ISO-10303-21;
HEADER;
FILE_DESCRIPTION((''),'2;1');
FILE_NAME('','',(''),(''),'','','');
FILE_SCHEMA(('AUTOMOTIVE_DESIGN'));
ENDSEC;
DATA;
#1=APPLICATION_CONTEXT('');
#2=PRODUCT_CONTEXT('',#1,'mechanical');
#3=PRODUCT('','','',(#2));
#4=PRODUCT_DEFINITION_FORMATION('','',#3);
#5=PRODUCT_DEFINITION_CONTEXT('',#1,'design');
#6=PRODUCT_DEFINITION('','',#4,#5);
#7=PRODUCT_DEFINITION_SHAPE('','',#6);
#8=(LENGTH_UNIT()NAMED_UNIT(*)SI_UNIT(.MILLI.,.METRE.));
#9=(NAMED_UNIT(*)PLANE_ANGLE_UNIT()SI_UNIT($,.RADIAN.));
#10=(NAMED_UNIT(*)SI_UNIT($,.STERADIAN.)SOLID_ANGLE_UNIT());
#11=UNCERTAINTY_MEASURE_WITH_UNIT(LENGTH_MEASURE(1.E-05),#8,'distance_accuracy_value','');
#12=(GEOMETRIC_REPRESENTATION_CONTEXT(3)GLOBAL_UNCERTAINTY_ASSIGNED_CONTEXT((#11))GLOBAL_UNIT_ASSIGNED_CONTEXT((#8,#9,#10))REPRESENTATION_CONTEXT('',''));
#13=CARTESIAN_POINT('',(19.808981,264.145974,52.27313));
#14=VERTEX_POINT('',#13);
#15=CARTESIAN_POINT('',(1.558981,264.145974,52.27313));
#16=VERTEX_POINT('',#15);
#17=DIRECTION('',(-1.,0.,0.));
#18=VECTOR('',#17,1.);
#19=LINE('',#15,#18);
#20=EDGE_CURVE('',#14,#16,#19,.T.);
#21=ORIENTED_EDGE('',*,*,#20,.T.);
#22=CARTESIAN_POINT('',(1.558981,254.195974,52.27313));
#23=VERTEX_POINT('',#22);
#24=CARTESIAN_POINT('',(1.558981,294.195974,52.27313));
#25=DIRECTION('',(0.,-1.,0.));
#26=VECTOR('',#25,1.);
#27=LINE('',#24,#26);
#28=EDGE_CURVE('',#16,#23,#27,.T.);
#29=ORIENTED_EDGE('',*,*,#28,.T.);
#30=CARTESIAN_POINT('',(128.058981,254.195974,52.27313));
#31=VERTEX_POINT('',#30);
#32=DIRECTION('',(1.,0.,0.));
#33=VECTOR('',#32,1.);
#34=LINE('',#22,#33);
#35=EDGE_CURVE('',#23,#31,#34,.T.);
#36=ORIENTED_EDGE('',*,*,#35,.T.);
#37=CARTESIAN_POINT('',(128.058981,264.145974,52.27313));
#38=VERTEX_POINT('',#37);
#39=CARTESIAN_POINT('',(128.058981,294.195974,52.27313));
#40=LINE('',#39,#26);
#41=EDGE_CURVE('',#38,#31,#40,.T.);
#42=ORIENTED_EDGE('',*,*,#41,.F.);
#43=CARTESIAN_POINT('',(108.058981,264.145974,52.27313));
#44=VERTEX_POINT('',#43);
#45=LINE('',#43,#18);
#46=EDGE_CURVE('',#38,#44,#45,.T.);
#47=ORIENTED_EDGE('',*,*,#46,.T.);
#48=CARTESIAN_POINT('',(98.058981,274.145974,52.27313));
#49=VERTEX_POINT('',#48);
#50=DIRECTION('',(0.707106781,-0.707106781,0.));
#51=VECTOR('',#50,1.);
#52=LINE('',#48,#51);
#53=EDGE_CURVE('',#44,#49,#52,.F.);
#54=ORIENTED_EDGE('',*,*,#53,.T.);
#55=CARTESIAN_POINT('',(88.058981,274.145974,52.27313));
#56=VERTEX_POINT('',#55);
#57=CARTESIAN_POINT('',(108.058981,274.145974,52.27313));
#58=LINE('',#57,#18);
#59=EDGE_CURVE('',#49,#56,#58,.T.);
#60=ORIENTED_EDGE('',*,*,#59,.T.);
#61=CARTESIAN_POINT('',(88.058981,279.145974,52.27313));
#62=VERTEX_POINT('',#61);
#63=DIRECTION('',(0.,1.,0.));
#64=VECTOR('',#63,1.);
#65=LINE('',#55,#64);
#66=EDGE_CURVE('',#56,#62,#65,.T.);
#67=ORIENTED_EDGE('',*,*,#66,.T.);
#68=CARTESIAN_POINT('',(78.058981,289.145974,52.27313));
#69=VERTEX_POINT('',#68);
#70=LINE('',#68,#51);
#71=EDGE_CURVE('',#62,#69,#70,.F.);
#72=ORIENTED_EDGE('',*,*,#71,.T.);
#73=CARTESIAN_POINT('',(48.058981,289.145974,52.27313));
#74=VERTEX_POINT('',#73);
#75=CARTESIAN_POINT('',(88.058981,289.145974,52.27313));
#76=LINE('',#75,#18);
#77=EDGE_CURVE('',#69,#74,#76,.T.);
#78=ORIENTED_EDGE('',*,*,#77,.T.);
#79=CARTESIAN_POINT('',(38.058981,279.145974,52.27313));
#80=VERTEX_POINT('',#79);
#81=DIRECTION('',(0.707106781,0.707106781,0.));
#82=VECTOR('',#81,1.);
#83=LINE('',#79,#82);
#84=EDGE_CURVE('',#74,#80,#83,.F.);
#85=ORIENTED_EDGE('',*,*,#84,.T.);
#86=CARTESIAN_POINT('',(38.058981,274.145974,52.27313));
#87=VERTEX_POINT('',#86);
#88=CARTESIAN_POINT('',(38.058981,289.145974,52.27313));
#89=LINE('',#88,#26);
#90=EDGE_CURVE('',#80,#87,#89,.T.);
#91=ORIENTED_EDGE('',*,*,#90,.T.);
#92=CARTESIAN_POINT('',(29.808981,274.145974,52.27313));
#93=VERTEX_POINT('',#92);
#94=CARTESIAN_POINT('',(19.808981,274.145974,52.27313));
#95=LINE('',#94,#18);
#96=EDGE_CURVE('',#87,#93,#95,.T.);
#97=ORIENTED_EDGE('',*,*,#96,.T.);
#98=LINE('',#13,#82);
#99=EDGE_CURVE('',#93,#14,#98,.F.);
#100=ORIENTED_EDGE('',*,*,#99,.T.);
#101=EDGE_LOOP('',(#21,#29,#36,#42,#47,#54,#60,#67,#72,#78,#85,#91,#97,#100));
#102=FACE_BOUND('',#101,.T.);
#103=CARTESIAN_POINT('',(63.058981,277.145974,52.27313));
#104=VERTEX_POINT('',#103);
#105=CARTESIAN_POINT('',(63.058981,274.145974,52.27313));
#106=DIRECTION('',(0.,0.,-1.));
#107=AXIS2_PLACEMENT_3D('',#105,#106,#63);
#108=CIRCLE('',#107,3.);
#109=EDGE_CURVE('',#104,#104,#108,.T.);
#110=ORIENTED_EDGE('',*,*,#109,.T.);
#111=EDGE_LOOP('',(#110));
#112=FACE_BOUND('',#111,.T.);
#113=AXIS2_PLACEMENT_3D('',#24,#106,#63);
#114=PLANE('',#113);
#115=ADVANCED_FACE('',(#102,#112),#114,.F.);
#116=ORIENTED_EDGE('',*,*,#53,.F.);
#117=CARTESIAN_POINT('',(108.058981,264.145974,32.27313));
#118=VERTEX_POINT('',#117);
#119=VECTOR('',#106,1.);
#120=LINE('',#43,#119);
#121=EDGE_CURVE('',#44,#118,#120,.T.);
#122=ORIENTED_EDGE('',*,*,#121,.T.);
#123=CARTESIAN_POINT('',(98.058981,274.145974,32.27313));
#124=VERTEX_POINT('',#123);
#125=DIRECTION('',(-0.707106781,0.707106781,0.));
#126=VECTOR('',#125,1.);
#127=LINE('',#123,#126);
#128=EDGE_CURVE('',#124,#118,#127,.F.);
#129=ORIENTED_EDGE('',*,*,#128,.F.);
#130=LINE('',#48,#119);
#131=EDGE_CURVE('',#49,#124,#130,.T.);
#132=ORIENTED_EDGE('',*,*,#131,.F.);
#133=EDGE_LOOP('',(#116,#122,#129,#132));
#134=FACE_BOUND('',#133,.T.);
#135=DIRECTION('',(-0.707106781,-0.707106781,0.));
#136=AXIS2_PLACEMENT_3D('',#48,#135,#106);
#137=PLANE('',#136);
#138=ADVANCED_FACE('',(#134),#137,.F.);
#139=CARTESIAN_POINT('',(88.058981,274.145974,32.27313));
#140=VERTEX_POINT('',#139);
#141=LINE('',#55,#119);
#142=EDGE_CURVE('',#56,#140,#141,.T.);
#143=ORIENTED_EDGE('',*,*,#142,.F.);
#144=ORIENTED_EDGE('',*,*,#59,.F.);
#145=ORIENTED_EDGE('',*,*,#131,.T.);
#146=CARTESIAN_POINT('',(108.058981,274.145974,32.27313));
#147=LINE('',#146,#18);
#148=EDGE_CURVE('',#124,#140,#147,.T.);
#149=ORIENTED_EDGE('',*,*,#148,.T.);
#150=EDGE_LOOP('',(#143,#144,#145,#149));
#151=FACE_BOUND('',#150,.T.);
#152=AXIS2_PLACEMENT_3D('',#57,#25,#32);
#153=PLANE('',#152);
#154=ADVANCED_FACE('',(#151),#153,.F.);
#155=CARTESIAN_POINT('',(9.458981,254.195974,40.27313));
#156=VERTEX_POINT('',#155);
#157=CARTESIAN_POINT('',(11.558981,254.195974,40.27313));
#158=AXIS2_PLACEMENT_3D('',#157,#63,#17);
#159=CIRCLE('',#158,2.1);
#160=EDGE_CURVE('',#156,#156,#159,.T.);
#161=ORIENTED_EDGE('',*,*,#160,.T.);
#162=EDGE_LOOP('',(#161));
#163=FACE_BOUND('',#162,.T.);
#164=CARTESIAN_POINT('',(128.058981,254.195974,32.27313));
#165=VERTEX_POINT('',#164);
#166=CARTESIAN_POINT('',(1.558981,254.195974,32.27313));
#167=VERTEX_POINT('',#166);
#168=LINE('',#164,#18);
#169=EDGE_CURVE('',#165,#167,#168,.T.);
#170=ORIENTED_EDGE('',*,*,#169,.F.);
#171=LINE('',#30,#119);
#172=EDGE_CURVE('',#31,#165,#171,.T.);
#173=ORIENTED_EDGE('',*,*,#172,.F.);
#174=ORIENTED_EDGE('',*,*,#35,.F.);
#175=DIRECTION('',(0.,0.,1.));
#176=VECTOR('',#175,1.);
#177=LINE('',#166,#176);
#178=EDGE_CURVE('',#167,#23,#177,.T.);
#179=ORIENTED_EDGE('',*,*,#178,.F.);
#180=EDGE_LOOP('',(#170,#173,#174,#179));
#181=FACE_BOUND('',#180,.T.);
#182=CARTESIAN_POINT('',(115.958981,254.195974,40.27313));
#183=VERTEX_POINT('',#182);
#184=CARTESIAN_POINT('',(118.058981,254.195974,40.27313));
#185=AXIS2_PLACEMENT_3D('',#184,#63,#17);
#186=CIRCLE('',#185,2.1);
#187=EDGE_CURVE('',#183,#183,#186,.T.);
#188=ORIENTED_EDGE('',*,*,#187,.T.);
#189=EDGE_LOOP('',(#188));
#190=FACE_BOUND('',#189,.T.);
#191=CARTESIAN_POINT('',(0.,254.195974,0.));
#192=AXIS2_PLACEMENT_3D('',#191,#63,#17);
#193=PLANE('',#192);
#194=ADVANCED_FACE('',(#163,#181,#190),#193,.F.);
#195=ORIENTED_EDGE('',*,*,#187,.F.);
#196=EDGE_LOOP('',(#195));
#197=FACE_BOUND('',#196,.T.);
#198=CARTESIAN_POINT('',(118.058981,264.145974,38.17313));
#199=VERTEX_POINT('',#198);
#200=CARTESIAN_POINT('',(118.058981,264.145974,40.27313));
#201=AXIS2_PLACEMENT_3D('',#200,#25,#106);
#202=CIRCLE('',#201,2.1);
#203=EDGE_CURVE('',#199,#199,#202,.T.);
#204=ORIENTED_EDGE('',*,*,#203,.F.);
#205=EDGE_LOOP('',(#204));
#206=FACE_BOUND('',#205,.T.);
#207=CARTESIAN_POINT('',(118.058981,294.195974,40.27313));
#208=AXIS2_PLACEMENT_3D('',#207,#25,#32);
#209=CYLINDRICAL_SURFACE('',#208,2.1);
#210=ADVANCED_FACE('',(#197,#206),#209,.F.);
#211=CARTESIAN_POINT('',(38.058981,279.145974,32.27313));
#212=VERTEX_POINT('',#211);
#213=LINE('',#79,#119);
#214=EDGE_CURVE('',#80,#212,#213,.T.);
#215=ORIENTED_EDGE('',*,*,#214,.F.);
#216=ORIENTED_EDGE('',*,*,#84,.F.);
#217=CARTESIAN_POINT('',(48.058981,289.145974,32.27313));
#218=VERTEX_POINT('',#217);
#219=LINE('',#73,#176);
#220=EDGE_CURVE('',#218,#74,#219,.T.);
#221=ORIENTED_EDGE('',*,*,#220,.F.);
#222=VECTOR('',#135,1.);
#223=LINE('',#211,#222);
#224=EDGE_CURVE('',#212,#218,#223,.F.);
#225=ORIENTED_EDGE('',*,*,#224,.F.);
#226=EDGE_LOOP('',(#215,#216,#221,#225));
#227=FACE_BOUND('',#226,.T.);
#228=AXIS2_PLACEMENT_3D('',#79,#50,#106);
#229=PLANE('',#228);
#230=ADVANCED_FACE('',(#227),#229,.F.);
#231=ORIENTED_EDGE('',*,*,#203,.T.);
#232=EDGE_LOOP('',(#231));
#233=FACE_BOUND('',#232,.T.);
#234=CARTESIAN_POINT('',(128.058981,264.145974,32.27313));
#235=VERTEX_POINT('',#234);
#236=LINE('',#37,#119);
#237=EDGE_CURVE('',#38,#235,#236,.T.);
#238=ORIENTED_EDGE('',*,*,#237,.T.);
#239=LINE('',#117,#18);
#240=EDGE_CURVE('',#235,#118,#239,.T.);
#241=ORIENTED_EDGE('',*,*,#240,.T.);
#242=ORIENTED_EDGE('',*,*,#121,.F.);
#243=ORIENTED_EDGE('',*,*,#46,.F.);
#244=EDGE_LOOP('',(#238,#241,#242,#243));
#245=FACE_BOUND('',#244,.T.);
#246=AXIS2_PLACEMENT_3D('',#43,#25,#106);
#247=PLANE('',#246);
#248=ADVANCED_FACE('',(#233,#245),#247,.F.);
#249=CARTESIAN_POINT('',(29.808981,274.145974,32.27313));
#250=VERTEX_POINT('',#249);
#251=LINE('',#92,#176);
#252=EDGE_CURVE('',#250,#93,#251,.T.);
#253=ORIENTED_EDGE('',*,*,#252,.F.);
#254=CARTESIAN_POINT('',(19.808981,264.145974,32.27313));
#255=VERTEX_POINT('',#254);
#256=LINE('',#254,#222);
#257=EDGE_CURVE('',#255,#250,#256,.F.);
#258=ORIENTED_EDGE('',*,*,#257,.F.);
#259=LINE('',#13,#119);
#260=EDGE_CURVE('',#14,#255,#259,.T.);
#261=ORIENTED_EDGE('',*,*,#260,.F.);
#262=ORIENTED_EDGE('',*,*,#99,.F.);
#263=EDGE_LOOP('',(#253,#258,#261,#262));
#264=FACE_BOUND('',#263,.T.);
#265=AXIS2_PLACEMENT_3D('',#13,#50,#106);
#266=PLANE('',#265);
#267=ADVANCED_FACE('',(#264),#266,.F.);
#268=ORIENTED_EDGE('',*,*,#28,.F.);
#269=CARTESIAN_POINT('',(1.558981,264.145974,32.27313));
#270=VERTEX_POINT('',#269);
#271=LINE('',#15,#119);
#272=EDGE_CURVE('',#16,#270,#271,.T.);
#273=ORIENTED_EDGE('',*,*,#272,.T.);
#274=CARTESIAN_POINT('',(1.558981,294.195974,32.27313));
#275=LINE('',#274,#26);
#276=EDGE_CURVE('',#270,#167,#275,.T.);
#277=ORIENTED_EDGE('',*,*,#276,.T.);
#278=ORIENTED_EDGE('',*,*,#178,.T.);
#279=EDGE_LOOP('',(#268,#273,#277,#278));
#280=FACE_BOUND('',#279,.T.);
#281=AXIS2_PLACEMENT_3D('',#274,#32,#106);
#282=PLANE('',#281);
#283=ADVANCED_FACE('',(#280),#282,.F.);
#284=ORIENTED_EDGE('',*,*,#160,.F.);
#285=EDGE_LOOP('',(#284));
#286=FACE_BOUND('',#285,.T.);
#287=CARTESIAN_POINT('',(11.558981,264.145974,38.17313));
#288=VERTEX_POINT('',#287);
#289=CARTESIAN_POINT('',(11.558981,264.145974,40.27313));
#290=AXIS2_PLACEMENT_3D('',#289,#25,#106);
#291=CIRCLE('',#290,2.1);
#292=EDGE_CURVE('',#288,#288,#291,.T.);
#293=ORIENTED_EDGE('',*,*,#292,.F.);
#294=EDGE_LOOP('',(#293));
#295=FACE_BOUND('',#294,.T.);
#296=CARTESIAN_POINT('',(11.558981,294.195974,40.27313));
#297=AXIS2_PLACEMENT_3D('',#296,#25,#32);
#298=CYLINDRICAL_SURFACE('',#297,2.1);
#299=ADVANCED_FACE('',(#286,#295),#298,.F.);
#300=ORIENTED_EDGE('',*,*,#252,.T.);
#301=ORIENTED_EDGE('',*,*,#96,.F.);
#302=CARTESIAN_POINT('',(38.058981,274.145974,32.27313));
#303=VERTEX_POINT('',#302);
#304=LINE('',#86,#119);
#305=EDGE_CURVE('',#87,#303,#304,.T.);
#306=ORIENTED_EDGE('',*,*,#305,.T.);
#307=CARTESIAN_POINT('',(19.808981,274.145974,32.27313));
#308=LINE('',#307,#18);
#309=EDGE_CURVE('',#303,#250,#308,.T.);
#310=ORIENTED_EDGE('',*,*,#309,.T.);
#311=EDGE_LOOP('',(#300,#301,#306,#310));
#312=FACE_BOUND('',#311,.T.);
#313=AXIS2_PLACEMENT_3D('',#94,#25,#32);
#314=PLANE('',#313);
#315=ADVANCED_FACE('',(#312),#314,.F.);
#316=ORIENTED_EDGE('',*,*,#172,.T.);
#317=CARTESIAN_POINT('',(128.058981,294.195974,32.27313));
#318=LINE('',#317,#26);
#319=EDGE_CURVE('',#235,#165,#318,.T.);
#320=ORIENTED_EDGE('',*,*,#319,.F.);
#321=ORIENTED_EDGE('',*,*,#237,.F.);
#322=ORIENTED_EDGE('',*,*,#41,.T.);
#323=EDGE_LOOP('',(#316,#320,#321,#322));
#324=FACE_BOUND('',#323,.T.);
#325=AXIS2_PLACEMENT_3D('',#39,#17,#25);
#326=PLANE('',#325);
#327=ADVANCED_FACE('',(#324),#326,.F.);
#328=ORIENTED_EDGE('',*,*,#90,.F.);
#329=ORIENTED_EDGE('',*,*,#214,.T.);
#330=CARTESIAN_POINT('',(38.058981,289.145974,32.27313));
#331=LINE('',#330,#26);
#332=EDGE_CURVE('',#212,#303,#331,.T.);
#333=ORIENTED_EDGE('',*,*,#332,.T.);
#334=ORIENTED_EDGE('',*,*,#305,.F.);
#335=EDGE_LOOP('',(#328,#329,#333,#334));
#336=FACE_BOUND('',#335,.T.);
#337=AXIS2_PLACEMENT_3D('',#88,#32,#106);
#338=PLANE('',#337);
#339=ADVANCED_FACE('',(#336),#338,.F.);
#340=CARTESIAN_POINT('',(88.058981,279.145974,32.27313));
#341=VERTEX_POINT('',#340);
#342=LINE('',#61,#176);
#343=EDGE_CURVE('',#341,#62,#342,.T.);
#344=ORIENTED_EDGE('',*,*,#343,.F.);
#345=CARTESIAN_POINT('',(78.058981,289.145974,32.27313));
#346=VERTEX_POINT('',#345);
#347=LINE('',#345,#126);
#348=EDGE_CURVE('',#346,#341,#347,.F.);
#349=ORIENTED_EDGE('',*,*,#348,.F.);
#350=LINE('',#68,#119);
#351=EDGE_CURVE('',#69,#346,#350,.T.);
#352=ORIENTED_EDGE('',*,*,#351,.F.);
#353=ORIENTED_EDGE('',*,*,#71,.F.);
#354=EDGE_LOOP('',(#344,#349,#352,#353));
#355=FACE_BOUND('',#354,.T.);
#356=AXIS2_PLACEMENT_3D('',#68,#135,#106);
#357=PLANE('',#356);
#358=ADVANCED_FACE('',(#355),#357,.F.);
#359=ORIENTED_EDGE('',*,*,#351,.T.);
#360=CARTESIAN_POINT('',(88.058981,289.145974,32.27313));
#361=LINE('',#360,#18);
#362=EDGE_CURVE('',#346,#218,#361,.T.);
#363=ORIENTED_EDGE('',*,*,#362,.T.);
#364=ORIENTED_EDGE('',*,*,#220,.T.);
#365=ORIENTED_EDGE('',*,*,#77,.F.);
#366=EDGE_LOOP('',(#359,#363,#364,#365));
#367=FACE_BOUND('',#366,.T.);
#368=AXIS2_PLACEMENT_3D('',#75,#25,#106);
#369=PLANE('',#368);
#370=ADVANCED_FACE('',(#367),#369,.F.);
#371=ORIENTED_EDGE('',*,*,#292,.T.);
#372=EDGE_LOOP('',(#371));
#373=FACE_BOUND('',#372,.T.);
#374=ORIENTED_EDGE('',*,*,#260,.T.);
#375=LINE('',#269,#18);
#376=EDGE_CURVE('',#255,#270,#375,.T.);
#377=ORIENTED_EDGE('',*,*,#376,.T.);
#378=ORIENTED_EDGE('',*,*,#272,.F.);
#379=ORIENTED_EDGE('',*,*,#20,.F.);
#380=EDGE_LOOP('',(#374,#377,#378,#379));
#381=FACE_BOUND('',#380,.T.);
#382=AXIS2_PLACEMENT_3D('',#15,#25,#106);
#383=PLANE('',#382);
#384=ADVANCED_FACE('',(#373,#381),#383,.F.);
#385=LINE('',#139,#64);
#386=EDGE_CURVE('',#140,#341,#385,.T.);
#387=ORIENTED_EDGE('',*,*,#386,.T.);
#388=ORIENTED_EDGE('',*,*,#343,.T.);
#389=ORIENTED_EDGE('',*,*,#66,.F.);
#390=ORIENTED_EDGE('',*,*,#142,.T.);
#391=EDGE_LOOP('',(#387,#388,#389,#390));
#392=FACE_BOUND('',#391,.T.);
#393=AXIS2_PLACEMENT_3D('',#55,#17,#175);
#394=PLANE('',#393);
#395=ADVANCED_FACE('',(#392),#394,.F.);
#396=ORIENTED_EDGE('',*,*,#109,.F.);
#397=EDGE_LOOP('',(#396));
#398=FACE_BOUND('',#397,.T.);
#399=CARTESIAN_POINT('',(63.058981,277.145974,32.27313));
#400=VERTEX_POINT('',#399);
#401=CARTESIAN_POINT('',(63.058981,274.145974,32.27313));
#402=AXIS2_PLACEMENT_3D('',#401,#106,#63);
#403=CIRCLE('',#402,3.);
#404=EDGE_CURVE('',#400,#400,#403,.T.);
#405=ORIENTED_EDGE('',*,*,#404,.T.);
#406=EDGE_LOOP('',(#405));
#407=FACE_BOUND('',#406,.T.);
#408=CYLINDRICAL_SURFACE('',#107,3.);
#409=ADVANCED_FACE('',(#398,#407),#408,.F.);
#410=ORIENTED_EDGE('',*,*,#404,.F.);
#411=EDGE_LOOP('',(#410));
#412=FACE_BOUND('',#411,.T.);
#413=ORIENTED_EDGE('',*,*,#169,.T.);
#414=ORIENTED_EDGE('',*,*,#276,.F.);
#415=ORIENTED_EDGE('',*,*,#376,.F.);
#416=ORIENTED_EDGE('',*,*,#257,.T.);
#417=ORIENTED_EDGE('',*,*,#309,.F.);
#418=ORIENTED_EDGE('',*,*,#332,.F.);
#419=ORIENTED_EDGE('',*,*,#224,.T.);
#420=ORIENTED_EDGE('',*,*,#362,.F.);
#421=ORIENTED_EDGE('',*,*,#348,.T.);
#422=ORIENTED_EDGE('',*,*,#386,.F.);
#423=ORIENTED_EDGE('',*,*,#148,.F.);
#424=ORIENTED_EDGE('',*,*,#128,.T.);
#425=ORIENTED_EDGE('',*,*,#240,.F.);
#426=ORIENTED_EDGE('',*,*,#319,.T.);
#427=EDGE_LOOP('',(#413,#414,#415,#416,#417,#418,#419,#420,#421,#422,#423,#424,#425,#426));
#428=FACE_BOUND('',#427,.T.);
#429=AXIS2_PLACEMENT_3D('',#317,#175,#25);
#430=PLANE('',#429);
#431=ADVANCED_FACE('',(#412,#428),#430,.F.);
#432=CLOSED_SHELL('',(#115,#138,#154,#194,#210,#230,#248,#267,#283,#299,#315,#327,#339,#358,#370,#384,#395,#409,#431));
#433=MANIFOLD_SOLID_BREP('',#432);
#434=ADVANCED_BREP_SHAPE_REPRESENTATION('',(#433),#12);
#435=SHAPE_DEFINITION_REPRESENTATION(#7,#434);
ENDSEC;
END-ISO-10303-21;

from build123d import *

# Parameters (mm, degrees)
SKETCH_1_W          = 126.5
SKETCH_1_H          = 20
SKETCH_1_R          = 2.1
EXTRUDE_1_DEPTH     = 40
SKETCH_2_R          = 3
CUT_EXTRUDE_1_DEPTH = 322.481529503
CHAMFER_1_SIZE      = 10
CHAMFER_2_SIZE      = 10


with BuildPart() as part:
    # Эскиз1 → Бобышка-Вытянуть1 (new body)
    with BuildSketch(Plane(origin=(0, 254.195974268, 0), x_dir=(1, 0, 0), z_dir=(0, 1, 0))):
        with Locations((64.808980694, -42.273129836)):
            Rectangle(SKETCH_1_W, SKETCH_1_H)
        with Locations(Location((11.55898069, -40.273129836, 0), (0, 0, 180))):
            Circle(SKETCH_1_R, mode=Mode.SUBTRACT)
        with Locations(Location((118.058980694, -40.273129836, 0), (0, 0, 180))):
            Circle(SKETCH_1_R, mode=Mode.SUBTRACT)
    extrude(amount=EXTRUDE_1_DEPTH)

    # Эскиз2 → Вырез-Вытянуть1 (cut, through all)
    with BuildSketch(Plane(origin=(0, 0, 32.273129836), x_dir=(-1, 0, 0), z_dir=(0, 0, -1))):
        with Locations(Location((-63.058980694, 274.145974268, 0), (0, 0, 90))):
            Circle(SKETCH_2_R)
        Polygon((-128.058980694, 294.195974268), (-128.058980694, 274.195974268), (-128.058980694, 264.145974268), (-108.058980694, 264.145974268), (-108.058980694, 274.145974268), (-88.058980694, 274.145974268), (-88.058980694, 289.145974268), (-38.058980694, 289.145974268), (-38.058980694, 274.145974268), (-19.808980694, 274.145974268), (-19.808980694, 264.145974268), (-1.558980694, 264.145974268), (-1.558980694, 274.195974268), (-1.558980694, 294.195974268), align=None)
    extrude(amount=-CUT_EXTRUDE_1_DEPTH, mode=Mode.SUBTRACT)

    # Фаска1
    chamfer_1_edges = [part.edges().sort_by_distance(p)[0] for p in [
        (38.058980694, 289.145974268, 42.273129836),
        (88.058980694, 289.145974268, 42.273129836),
    ]]
    chamfer(chamfer_1_edges, length=CHAMFER_1_SIZE)

    # Фаска2
    chamfer_2_edges = [part.edges().sort_by_distance(p)[0] for p in [
        (19.808980694, 274.145974268, 42.273129836),
        (108.058980694, 274.145974268, 42.273129836),
    ]]
    chamfer(chamfer_2_edges, length=CHAMFER_2_SIZE - 0.0001)  # a hair under: the kernel refuses the full size


solid = part.part
